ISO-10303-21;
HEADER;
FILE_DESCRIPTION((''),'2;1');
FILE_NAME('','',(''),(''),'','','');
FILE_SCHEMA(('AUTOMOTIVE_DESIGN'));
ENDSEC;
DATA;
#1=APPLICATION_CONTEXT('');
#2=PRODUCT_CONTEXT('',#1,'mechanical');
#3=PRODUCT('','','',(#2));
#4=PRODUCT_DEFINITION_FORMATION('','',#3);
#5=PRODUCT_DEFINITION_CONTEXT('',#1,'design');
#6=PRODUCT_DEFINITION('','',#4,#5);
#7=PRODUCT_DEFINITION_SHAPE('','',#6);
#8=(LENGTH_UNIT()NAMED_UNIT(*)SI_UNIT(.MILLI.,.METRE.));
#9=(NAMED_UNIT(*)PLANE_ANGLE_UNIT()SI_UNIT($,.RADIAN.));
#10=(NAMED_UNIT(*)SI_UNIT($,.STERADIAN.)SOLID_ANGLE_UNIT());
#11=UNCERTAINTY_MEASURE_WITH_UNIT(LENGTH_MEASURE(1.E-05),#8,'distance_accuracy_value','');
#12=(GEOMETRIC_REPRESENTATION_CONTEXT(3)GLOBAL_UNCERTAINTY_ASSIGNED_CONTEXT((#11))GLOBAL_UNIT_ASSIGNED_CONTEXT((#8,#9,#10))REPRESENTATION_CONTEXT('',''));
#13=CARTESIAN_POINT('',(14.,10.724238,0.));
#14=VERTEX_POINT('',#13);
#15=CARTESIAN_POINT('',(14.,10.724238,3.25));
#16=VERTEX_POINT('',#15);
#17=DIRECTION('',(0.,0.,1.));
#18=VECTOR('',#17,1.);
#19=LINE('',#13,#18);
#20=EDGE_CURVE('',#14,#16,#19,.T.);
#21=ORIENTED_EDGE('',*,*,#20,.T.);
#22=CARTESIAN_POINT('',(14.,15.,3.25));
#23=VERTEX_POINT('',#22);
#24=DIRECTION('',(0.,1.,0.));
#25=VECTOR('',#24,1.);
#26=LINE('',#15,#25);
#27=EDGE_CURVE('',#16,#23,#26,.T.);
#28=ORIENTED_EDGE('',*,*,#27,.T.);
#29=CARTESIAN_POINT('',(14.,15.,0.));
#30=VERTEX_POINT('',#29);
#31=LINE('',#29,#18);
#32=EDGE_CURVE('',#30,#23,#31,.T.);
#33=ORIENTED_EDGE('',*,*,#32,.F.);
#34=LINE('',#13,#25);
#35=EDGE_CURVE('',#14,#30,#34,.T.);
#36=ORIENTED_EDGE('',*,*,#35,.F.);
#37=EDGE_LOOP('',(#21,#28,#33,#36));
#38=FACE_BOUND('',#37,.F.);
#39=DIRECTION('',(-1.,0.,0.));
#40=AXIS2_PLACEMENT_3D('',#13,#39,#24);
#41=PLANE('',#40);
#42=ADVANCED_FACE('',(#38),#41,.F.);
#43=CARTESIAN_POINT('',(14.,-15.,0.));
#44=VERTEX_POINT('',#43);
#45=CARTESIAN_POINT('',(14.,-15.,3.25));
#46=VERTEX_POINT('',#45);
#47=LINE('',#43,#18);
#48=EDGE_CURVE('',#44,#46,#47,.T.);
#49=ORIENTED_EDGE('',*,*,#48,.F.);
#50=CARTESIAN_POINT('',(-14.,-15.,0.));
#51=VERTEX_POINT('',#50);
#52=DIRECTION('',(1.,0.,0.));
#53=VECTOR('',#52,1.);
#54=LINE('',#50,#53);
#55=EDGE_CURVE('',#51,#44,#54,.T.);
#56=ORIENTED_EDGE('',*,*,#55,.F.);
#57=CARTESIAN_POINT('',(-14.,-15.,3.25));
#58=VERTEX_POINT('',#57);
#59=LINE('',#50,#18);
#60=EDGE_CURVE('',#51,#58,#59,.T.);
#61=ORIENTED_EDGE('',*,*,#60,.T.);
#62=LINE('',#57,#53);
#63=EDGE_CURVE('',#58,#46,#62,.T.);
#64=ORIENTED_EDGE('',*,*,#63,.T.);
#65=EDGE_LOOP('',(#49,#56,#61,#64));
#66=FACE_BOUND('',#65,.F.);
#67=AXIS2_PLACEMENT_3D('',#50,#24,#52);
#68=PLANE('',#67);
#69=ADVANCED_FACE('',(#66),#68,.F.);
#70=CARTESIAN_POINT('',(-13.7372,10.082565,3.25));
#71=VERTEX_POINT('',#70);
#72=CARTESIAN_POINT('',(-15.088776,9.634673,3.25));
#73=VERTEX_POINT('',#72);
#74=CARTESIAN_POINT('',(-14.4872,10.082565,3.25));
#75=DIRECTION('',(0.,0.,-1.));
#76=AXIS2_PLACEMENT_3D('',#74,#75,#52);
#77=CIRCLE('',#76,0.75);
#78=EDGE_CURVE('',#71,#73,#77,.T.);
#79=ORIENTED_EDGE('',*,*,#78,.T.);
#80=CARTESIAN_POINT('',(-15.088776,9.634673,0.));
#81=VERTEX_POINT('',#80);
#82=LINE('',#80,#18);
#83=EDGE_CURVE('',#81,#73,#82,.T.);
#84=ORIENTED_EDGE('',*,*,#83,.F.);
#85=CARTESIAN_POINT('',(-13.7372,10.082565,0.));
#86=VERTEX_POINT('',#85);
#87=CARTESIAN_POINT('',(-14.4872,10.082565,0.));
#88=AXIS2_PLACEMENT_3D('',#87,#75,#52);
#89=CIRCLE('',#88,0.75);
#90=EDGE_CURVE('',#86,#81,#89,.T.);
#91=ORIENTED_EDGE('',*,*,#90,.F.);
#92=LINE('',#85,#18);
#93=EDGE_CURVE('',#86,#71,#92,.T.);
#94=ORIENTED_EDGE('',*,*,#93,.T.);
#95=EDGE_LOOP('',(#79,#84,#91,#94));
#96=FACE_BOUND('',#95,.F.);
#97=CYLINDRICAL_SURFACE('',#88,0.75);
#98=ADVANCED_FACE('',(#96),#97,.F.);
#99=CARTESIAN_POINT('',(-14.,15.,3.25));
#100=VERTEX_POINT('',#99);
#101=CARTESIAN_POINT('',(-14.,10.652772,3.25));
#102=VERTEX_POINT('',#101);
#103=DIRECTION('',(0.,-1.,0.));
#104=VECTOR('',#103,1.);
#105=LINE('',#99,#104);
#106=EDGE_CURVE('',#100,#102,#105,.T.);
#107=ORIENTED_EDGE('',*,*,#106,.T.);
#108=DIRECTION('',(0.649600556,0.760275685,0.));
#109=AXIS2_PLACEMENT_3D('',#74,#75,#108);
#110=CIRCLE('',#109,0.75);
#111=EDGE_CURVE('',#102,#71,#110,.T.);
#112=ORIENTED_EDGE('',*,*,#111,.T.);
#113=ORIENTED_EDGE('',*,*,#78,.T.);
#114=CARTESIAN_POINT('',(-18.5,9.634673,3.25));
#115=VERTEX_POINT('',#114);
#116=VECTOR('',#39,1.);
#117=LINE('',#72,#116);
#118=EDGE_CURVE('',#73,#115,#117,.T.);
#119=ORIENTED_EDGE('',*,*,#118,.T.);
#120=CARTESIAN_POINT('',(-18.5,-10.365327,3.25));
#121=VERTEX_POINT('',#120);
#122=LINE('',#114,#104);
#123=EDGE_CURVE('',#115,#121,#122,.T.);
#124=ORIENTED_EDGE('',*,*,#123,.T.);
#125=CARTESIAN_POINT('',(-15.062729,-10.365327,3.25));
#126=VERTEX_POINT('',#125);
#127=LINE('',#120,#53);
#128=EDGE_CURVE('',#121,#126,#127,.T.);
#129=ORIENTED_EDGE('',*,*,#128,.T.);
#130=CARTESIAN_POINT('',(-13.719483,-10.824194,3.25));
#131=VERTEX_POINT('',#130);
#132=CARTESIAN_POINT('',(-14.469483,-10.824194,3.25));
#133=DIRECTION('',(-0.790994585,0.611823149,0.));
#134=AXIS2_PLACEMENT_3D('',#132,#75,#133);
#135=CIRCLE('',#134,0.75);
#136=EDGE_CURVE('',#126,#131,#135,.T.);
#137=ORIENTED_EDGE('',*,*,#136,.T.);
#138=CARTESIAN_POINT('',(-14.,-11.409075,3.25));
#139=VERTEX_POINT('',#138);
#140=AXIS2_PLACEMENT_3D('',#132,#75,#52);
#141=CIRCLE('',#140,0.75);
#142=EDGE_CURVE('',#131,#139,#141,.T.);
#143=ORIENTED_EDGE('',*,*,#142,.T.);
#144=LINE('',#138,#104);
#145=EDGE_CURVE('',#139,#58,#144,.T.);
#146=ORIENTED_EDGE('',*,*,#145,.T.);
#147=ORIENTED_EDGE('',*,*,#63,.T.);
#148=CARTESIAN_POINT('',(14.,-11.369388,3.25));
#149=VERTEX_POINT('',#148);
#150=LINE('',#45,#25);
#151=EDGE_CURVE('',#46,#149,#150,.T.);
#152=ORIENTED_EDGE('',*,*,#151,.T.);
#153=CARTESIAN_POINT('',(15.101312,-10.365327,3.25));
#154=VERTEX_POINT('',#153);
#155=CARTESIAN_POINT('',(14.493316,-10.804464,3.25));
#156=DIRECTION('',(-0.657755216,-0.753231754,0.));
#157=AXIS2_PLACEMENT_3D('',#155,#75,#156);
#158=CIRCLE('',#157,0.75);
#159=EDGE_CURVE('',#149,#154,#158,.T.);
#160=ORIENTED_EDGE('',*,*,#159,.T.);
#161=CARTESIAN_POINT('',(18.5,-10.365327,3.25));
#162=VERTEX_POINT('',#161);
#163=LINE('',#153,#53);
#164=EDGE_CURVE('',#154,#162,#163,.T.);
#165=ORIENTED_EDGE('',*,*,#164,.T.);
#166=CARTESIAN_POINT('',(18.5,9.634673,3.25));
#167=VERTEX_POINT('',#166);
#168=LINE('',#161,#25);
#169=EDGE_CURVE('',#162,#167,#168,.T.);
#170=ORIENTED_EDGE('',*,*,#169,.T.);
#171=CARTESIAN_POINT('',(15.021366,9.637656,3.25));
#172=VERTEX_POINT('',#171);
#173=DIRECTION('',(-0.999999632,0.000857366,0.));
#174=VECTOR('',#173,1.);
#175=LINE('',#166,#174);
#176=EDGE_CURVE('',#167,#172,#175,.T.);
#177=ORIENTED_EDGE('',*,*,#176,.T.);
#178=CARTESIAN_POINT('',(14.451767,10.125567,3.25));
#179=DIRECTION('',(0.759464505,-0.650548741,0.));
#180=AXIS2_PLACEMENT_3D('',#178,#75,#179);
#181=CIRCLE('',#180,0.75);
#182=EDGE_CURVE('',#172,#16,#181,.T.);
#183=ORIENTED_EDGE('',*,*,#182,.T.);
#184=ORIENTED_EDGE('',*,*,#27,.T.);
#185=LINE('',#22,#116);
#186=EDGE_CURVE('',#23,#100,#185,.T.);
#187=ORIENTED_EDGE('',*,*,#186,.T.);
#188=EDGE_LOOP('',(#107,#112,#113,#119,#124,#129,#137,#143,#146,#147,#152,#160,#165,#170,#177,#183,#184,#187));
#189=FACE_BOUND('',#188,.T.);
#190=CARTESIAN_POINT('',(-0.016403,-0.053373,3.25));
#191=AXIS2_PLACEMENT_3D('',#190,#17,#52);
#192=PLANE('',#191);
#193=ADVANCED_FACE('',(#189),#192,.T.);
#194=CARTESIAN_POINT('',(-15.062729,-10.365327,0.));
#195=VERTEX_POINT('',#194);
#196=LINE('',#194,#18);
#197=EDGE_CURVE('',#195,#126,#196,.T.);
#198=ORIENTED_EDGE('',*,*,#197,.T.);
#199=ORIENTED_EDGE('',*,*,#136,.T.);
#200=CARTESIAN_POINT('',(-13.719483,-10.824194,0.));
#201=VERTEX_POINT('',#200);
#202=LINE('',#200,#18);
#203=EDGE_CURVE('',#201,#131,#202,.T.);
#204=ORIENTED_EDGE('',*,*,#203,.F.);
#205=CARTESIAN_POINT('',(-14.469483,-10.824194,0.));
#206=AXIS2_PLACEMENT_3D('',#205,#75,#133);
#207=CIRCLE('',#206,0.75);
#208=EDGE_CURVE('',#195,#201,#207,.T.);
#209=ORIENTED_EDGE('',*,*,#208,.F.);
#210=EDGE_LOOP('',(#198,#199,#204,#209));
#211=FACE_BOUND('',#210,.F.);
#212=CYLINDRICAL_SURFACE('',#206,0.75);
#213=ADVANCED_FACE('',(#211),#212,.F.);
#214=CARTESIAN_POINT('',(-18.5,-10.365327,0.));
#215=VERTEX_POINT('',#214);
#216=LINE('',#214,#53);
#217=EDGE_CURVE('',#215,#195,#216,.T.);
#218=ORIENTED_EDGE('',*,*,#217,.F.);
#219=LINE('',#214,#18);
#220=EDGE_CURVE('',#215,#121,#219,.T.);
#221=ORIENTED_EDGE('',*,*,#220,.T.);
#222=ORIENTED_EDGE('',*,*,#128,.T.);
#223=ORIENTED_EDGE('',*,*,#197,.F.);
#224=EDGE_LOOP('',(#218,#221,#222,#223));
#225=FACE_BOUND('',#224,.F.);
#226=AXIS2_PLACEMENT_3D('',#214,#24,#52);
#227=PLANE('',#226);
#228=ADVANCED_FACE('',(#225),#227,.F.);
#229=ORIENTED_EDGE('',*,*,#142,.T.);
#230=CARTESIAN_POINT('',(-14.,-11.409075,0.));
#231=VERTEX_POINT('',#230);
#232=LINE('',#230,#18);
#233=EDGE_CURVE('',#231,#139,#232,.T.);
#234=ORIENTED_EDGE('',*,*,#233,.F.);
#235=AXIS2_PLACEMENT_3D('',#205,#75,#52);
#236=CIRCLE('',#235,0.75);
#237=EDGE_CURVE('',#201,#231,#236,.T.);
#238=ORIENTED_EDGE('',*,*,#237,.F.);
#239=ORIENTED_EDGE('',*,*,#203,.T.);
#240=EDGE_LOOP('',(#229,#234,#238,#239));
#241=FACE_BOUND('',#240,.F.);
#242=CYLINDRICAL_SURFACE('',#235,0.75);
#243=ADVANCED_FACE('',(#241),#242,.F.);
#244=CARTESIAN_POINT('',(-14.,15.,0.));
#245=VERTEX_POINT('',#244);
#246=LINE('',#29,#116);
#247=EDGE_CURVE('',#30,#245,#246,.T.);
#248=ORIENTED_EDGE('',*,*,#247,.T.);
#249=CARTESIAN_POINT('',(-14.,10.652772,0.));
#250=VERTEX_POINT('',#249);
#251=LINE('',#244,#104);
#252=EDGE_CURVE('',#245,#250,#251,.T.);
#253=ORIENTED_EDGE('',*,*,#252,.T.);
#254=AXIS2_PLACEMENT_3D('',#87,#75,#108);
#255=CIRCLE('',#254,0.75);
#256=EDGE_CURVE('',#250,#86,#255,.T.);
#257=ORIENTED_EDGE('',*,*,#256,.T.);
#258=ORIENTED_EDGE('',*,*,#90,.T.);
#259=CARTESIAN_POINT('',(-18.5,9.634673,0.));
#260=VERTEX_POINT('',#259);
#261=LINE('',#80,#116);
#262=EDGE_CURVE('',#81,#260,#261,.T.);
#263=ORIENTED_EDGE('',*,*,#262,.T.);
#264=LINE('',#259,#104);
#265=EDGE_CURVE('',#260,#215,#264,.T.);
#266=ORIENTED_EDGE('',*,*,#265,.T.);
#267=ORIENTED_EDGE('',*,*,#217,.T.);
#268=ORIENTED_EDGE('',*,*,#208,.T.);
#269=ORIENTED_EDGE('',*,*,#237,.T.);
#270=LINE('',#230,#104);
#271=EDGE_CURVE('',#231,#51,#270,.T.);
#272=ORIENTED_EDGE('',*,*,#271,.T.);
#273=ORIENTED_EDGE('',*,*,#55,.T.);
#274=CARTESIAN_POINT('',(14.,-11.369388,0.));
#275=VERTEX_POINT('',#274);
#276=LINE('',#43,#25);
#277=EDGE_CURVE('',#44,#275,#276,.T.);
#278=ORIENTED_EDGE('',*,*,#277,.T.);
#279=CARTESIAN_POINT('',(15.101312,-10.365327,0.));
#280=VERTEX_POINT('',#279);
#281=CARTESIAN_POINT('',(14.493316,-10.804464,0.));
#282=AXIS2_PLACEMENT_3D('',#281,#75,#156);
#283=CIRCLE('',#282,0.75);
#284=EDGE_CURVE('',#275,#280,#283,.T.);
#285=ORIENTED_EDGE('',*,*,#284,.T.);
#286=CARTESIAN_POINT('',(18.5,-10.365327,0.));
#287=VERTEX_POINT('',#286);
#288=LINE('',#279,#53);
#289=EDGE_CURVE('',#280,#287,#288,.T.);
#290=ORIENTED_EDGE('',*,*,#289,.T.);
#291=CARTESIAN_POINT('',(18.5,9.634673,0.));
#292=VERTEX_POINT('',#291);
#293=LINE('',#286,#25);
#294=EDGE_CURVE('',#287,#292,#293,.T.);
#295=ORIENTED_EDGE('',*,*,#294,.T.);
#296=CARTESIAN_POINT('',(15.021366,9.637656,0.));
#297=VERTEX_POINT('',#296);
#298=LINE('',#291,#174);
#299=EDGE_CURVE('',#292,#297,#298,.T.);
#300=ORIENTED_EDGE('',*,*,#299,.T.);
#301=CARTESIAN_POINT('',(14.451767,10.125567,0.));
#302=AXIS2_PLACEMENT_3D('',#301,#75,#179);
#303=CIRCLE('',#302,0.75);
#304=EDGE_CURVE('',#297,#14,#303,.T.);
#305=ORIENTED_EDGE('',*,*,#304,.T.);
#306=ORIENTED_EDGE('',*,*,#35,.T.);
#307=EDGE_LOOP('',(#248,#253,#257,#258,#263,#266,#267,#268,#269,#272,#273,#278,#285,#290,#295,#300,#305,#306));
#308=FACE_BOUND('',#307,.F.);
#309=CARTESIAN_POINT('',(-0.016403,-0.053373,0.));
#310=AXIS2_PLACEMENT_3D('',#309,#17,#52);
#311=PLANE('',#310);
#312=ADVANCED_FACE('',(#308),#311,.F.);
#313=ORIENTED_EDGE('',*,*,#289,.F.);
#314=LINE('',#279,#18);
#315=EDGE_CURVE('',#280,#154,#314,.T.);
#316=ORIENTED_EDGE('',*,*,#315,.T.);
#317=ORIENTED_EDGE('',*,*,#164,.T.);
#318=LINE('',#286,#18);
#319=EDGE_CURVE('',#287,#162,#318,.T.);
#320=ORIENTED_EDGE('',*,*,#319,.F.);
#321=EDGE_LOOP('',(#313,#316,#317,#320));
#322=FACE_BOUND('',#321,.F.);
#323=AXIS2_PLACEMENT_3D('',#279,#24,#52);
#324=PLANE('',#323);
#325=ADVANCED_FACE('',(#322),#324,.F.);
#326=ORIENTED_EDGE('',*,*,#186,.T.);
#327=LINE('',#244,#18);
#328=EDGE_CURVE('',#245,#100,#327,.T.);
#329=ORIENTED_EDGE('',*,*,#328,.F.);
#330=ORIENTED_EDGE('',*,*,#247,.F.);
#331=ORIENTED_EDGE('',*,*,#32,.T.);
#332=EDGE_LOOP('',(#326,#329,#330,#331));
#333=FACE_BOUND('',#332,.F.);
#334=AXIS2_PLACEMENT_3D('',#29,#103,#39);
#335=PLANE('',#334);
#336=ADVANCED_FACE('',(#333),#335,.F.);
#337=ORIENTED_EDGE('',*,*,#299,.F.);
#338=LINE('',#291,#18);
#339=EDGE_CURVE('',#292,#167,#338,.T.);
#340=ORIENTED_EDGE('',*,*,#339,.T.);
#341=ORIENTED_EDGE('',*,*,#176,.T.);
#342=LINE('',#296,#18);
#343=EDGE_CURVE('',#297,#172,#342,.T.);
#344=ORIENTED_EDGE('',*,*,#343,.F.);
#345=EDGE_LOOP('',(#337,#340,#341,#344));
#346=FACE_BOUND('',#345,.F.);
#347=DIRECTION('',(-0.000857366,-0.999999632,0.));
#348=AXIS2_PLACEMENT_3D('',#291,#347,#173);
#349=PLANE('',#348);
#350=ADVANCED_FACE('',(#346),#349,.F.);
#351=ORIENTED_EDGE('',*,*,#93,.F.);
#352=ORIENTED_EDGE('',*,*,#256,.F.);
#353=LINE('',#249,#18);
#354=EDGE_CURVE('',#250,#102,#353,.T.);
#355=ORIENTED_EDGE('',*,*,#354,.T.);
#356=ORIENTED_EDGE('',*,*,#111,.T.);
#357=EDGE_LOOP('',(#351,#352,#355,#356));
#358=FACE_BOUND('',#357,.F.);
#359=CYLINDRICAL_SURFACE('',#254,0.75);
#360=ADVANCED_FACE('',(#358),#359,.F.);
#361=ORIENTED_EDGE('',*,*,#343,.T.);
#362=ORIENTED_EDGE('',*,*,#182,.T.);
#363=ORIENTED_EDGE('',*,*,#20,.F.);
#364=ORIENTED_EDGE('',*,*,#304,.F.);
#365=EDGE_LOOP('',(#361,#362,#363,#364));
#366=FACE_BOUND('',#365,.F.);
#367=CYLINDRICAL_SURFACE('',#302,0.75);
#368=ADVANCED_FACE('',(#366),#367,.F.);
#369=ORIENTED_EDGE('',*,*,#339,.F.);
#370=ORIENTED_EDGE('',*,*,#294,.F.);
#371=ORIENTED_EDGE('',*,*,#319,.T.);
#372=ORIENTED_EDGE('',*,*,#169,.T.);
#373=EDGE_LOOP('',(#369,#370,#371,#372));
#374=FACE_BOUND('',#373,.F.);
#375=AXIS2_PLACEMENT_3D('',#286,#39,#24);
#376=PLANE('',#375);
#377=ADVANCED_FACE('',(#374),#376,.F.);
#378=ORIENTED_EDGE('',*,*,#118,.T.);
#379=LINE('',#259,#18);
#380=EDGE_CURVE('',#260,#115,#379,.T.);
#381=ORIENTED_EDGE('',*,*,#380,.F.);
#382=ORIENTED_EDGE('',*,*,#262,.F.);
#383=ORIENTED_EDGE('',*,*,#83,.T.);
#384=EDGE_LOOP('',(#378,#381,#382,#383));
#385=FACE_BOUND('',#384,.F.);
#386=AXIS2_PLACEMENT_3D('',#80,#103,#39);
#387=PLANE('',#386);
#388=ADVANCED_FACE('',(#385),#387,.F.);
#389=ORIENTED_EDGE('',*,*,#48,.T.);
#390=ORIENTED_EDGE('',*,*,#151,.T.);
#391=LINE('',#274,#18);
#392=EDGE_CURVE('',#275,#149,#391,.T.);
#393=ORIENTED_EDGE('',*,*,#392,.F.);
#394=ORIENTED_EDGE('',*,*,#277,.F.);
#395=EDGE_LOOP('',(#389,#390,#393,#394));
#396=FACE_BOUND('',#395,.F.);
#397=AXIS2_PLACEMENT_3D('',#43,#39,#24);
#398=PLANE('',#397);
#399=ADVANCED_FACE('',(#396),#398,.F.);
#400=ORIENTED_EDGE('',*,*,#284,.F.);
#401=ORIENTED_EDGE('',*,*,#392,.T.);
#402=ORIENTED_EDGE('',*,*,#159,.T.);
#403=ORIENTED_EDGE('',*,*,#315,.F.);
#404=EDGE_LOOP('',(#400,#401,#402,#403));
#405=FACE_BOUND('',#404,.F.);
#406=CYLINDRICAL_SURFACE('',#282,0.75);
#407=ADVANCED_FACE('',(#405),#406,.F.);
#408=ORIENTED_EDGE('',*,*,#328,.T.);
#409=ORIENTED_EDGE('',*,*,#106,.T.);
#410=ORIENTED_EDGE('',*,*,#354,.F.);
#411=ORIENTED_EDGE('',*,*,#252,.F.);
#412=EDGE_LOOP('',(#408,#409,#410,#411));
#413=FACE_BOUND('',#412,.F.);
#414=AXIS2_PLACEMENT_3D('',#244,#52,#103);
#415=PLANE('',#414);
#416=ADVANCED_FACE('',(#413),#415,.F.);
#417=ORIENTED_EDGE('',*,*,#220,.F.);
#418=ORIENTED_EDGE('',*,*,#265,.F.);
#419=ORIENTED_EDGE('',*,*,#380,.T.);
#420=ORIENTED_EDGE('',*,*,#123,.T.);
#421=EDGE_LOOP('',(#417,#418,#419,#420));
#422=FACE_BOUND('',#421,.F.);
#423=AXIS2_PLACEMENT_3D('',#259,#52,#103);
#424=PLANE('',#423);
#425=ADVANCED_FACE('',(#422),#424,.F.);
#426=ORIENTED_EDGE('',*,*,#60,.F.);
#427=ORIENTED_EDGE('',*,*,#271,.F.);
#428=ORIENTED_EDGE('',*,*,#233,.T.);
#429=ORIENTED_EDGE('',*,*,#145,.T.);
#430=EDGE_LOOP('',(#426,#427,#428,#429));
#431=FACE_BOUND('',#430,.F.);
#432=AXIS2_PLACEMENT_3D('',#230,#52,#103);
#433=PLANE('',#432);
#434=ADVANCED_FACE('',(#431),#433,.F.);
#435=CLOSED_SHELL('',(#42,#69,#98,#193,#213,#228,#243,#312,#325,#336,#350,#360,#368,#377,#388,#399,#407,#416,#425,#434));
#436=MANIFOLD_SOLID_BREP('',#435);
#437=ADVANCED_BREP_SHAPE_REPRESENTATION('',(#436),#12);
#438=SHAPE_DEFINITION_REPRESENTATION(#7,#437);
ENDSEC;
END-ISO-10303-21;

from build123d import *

# Parameters (mm, degrees)
F1_DEPTH = 3.25


# Not quite as in the source:
# - a feature names something its author has since deleted; it is built from what else it names


with BuildPart() as f1:
    # F0 (on Top) → F1 (new body)
    with BuildSketch(Plane.XY):
        with BuildLine():
            Line((-15.0887755982, 9.6346731841), (-18.5, 9.6346731841))
            Line((-18.5, 9.6346731841), (-18.5, -10.3653268159))
            Line((-18.5, -10.3653268159), (-15.0627288748, -10.3653268159))
            ThreePointArc((-15.0627288748, -10.3653268159), (-14.2270313471, -10.1144637876), (-13.719482936, -10.824194178))
            ThreePointArc((-13.719482936, -10.824194178), (-13.7932388225, -11.1485302676), (-14, -11.4090751683))
            Line((-14, -11.4090751683), (-14, -15))
            Line((-14, -15), (14, -15))
            Line((14, -15), (14, -11.3693879251))
            ThreePointArc((14, -11.3693879251), (13.9880219466, -10.2502281458), (15.1013118376, -10.3653268159))
            Line((15.1013118376, -10.3653268159), (18.5, -10.3653268159))
            Line((18.5, -10.3653268159), (18.5, 9.6346731841))
            Line((18.5, 9.6346731841), (15.021365697, 9.6376556492))
            ThreePointArc((15.021365697, 9.6376556492), (13.9052912015, 9.611890406), (14, 10.7242376408))
            Line((14, 10.7242376408), (14, 15))
            Line((14, 15), (-14, 15))
            Line((-14, 15), (-14, 10.6527720123))
            ThreePointArc((-14, 10.6527720123), (-13.8060615496, 10.3964917422), (-13.7372004166, 10.082565248))
            ThreePointArc((-13.7372004166, 10.082565248), (-14.251278169, 9.3706377987), (-15.0887755982, 9.6346731841))
        make_face()
    extrude(amount=F1_DEPTH)


solid = f1.part
